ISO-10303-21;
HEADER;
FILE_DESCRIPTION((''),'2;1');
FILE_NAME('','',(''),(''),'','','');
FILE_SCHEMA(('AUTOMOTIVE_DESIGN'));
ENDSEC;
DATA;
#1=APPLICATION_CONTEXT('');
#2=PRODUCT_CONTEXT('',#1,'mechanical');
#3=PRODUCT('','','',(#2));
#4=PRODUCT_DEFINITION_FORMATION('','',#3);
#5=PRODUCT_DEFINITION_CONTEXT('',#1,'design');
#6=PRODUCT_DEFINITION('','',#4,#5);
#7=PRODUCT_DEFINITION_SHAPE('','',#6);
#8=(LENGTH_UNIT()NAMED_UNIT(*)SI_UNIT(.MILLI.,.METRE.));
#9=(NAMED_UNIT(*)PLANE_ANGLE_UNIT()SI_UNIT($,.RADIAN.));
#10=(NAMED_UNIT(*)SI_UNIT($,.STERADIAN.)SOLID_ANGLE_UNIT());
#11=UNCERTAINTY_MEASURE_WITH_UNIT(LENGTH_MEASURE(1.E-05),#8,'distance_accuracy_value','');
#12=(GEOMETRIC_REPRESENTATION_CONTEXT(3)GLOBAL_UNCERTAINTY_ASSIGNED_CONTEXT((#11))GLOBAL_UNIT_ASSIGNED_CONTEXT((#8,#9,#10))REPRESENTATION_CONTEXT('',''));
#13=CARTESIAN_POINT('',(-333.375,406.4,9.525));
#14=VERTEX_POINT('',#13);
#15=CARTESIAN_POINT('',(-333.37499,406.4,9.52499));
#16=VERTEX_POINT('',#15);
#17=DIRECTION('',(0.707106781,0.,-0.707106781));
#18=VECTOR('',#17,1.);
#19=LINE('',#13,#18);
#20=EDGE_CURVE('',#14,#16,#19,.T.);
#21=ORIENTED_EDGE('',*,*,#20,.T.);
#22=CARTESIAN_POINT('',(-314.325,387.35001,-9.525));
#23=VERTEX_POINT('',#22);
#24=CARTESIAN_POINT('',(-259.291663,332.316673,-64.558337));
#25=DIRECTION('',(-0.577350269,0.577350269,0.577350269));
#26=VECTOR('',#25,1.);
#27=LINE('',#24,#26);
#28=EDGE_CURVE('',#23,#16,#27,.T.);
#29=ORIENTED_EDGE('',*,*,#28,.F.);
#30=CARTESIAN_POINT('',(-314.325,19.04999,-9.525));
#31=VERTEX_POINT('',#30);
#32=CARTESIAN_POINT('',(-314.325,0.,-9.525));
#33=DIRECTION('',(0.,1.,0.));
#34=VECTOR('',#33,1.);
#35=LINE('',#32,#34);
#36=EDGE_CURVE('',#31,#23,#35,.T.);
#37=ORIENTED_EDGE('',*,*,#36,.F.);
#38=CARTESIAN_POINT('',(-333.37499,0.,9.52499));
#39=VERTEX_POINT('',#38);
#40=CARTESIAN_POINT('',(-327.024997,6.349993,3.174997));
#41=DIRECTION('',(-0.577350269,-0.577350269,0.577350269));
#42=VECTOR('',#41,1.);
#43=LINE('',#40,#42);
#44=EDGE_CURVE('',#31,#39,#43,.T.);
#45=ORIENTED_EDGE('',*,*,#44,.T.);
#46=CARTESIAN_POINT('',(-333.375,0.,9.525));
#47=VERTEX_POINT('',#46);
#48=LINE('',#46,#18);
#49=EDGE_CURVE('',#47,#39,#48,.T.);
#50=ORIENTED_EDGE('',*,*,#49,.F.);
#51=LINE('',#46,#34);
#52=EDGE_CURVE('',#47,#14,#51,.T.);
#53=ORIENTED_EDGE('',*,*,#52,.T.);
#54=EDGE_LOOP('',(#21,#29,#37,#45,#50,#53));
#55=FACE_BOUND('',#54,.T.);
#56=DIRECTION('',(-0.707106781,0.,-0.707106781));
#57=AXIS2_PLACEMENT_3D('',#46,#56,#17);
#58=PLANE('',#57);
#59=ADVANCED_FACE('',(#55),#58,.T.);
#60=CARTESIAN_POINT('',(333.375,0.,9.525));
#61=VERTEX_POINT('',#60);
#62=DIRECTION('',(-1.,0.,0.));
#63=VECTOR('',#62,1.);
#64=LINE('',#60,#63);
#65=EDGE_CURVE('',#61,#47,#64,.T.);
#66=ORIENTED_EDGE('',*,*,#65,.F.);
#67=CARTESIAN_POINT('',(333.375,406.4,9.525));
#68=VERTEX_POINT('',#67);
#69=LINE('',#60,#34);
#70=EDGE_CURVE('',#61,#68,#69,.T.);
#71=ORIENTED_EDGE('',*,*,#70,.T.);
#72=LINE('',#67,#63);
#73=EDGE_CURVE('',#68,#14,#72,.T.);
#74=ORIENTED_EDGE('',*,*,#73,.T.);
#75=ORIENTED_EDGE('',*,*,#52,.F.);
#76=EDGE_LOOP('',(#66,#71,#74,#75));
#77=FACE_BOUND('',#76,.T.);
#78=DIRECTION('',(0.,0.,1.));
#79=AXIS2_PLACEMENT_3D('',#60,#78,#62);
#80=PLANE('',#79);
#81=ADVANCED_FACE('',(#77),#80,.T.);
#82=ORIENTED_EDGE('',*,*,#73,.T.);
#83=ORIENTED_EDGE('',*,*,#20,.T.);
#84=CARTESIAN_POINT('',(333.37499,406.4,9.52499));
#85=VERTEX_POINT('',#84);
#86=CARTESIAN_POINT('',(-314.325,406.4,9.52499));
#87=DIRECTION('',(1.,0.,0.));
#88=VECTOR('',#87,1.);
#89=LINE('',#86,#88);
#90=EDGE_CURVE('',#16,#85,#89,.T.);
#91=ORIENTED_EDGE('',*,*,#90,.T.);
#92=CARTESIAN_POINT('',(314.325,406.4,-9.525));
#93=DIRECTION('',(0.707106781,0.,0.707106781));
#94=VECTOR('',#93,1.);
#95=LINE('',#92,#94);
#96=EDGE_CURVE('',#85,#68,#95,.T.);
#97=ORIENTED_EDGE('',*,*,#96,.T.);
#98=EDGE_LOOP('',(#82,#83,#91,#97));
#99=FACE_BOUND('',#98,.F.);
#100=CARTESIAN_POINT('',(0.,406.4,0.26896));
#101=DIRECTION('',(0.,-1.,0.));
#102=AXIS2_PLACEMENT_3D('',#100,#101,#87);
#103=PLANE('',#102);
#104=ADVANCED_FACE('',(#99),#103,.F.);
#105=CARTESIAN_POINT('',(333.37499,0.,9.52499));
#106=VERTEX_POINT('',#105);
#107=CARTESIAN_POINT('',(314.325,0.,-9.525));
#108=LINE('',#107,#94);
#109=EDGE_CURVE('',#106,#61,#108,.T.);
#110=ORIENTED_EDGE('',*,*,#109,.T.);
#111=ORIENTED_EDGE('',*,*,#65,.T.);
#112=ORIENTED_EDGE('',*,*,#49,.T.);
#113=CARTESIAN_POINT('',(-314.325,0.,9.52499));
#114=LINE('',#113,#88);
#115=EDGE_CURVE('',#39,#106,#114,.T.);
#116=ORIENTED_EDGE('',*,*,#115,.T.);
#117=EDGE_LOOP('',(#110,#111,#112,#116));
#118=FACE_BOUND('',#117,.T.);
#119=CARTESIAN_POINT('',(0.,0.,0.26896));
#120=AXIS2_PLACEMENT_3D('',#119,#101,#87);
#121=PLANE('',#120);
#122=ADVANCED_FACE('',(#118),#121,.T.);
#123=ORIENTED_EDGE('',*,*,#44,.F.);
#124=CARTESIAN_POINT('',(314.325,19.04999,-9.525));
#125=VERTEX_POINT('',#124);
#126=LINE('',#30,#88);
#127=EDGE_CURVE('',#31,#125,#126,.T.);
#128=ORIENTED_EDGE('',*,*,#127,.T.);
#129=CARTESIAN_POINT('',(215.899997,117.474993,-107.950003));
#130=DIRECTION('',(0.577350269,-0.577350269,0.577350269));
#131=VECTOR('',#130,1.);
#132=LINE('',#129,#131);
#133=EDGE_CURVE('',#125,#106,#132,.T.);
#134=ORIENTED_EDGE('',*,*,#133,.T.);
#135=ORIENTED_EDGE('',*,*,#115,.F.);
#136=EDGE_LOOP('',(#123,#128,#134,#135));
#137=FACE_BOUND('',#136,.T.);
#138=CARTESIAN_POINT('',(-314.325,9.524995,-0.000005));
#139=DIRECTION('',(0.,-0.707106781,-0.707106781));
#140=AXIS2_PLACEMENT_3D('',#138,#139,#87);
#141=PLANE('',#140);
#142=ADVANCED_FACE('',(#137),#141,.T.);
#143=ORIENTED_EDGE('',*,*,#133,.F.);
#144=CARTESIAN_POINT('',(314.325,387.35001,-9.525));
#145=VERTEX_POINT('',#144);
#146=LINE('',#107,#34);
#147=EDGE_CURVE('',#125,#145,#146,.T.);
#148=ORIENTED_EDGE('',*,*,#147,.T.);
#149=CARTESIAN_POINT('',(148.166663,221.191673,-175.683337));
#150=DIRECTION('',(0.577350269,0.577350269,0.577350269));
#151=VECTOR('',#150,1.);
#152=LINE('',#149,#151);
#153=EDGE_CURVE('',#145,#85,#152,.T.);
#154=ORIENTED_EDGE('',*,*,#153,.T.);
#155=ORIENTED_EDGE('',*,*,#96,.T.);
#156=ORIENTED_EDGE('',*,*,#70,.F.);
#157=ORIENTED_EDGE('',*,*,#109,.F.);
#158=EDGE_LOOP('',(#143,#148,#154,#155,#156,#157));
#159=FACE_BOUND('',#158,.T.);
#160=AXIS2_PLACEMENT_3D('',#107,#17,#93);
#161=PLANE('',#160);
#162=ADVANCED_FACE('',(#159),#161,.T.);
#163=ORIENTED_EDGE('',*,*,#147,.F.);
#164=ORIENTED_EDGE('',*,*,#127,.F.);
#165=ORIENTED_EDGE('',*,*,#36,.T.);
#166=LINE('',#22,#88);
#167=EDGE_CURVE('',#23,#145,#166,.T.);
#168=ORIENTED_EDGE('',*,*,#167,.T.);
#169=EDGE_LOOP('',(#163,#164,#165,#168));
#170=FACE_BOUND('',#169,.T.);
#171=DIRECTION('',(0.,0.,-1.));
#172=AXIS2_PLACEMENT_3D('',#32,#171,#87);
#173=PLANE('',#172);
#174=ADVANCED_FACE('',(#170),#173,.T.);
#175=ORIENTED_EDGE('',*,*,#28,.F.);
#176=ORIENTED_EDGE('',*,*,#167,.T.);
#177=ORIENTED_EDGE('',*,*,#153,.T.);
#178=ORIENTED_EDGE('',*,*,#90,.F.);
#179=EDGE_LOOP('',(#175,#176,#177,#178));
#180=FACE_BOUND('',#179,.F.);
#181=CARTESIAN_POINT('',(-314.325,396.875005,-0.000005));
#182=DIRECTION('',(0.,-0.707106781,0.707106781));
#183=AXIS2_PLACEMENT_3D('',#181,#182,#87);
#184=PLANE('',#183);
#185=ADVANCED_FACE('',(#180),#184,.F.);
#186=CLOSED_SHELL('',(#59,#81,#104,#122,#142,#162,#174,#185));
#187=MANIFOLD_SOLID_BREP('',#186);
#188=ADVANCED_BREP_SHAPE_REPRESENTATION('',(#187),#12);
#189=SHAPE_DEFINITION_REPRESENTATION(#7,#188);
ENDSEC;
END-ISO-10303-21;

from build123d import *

# Parameters (mm, degrees)
F1_DEPTH = 406.4
F2_SIZE  = 19.04999
F3_SIZE  = 19.04999


# Not quite as in the source:
# - a fillet or chamfer is up to 0.001 mm smaller than in the source, because OpenCascade refuses the exact size


with BuildPart() as f1:
    # F0 (on Front) → F1 (new body)
    with BuildSketch(Plane.XZ):
        Polygon((333.375, 9.525), (-333.375, 9.525), (-314.325, -9.525), (314.325, -9.525), align=None)
    extrude(amount=-F1_DEPTH)

    # F2 (size 19.05 in the source; OpenCascade refuses exactly that, so slightly less here)
    f2_edges = [f1.edges().sort_by_distance(p)[0] for p in [
        (0, 406.4, -9.525),
    ]]
    chamfer(f2_edges, length=F2_SIZE)

    # F3 (size 19.05 in the source; OpenCascade refuses exactly that, so slightly less here)
    f3_edges = [f1.edges().sort_by_distance(p)[0] for p in [
        (0, 0, -9.525),
    ]]
    chamfer(f3_edges, length=F3_SIZE)


solid = f1.part
